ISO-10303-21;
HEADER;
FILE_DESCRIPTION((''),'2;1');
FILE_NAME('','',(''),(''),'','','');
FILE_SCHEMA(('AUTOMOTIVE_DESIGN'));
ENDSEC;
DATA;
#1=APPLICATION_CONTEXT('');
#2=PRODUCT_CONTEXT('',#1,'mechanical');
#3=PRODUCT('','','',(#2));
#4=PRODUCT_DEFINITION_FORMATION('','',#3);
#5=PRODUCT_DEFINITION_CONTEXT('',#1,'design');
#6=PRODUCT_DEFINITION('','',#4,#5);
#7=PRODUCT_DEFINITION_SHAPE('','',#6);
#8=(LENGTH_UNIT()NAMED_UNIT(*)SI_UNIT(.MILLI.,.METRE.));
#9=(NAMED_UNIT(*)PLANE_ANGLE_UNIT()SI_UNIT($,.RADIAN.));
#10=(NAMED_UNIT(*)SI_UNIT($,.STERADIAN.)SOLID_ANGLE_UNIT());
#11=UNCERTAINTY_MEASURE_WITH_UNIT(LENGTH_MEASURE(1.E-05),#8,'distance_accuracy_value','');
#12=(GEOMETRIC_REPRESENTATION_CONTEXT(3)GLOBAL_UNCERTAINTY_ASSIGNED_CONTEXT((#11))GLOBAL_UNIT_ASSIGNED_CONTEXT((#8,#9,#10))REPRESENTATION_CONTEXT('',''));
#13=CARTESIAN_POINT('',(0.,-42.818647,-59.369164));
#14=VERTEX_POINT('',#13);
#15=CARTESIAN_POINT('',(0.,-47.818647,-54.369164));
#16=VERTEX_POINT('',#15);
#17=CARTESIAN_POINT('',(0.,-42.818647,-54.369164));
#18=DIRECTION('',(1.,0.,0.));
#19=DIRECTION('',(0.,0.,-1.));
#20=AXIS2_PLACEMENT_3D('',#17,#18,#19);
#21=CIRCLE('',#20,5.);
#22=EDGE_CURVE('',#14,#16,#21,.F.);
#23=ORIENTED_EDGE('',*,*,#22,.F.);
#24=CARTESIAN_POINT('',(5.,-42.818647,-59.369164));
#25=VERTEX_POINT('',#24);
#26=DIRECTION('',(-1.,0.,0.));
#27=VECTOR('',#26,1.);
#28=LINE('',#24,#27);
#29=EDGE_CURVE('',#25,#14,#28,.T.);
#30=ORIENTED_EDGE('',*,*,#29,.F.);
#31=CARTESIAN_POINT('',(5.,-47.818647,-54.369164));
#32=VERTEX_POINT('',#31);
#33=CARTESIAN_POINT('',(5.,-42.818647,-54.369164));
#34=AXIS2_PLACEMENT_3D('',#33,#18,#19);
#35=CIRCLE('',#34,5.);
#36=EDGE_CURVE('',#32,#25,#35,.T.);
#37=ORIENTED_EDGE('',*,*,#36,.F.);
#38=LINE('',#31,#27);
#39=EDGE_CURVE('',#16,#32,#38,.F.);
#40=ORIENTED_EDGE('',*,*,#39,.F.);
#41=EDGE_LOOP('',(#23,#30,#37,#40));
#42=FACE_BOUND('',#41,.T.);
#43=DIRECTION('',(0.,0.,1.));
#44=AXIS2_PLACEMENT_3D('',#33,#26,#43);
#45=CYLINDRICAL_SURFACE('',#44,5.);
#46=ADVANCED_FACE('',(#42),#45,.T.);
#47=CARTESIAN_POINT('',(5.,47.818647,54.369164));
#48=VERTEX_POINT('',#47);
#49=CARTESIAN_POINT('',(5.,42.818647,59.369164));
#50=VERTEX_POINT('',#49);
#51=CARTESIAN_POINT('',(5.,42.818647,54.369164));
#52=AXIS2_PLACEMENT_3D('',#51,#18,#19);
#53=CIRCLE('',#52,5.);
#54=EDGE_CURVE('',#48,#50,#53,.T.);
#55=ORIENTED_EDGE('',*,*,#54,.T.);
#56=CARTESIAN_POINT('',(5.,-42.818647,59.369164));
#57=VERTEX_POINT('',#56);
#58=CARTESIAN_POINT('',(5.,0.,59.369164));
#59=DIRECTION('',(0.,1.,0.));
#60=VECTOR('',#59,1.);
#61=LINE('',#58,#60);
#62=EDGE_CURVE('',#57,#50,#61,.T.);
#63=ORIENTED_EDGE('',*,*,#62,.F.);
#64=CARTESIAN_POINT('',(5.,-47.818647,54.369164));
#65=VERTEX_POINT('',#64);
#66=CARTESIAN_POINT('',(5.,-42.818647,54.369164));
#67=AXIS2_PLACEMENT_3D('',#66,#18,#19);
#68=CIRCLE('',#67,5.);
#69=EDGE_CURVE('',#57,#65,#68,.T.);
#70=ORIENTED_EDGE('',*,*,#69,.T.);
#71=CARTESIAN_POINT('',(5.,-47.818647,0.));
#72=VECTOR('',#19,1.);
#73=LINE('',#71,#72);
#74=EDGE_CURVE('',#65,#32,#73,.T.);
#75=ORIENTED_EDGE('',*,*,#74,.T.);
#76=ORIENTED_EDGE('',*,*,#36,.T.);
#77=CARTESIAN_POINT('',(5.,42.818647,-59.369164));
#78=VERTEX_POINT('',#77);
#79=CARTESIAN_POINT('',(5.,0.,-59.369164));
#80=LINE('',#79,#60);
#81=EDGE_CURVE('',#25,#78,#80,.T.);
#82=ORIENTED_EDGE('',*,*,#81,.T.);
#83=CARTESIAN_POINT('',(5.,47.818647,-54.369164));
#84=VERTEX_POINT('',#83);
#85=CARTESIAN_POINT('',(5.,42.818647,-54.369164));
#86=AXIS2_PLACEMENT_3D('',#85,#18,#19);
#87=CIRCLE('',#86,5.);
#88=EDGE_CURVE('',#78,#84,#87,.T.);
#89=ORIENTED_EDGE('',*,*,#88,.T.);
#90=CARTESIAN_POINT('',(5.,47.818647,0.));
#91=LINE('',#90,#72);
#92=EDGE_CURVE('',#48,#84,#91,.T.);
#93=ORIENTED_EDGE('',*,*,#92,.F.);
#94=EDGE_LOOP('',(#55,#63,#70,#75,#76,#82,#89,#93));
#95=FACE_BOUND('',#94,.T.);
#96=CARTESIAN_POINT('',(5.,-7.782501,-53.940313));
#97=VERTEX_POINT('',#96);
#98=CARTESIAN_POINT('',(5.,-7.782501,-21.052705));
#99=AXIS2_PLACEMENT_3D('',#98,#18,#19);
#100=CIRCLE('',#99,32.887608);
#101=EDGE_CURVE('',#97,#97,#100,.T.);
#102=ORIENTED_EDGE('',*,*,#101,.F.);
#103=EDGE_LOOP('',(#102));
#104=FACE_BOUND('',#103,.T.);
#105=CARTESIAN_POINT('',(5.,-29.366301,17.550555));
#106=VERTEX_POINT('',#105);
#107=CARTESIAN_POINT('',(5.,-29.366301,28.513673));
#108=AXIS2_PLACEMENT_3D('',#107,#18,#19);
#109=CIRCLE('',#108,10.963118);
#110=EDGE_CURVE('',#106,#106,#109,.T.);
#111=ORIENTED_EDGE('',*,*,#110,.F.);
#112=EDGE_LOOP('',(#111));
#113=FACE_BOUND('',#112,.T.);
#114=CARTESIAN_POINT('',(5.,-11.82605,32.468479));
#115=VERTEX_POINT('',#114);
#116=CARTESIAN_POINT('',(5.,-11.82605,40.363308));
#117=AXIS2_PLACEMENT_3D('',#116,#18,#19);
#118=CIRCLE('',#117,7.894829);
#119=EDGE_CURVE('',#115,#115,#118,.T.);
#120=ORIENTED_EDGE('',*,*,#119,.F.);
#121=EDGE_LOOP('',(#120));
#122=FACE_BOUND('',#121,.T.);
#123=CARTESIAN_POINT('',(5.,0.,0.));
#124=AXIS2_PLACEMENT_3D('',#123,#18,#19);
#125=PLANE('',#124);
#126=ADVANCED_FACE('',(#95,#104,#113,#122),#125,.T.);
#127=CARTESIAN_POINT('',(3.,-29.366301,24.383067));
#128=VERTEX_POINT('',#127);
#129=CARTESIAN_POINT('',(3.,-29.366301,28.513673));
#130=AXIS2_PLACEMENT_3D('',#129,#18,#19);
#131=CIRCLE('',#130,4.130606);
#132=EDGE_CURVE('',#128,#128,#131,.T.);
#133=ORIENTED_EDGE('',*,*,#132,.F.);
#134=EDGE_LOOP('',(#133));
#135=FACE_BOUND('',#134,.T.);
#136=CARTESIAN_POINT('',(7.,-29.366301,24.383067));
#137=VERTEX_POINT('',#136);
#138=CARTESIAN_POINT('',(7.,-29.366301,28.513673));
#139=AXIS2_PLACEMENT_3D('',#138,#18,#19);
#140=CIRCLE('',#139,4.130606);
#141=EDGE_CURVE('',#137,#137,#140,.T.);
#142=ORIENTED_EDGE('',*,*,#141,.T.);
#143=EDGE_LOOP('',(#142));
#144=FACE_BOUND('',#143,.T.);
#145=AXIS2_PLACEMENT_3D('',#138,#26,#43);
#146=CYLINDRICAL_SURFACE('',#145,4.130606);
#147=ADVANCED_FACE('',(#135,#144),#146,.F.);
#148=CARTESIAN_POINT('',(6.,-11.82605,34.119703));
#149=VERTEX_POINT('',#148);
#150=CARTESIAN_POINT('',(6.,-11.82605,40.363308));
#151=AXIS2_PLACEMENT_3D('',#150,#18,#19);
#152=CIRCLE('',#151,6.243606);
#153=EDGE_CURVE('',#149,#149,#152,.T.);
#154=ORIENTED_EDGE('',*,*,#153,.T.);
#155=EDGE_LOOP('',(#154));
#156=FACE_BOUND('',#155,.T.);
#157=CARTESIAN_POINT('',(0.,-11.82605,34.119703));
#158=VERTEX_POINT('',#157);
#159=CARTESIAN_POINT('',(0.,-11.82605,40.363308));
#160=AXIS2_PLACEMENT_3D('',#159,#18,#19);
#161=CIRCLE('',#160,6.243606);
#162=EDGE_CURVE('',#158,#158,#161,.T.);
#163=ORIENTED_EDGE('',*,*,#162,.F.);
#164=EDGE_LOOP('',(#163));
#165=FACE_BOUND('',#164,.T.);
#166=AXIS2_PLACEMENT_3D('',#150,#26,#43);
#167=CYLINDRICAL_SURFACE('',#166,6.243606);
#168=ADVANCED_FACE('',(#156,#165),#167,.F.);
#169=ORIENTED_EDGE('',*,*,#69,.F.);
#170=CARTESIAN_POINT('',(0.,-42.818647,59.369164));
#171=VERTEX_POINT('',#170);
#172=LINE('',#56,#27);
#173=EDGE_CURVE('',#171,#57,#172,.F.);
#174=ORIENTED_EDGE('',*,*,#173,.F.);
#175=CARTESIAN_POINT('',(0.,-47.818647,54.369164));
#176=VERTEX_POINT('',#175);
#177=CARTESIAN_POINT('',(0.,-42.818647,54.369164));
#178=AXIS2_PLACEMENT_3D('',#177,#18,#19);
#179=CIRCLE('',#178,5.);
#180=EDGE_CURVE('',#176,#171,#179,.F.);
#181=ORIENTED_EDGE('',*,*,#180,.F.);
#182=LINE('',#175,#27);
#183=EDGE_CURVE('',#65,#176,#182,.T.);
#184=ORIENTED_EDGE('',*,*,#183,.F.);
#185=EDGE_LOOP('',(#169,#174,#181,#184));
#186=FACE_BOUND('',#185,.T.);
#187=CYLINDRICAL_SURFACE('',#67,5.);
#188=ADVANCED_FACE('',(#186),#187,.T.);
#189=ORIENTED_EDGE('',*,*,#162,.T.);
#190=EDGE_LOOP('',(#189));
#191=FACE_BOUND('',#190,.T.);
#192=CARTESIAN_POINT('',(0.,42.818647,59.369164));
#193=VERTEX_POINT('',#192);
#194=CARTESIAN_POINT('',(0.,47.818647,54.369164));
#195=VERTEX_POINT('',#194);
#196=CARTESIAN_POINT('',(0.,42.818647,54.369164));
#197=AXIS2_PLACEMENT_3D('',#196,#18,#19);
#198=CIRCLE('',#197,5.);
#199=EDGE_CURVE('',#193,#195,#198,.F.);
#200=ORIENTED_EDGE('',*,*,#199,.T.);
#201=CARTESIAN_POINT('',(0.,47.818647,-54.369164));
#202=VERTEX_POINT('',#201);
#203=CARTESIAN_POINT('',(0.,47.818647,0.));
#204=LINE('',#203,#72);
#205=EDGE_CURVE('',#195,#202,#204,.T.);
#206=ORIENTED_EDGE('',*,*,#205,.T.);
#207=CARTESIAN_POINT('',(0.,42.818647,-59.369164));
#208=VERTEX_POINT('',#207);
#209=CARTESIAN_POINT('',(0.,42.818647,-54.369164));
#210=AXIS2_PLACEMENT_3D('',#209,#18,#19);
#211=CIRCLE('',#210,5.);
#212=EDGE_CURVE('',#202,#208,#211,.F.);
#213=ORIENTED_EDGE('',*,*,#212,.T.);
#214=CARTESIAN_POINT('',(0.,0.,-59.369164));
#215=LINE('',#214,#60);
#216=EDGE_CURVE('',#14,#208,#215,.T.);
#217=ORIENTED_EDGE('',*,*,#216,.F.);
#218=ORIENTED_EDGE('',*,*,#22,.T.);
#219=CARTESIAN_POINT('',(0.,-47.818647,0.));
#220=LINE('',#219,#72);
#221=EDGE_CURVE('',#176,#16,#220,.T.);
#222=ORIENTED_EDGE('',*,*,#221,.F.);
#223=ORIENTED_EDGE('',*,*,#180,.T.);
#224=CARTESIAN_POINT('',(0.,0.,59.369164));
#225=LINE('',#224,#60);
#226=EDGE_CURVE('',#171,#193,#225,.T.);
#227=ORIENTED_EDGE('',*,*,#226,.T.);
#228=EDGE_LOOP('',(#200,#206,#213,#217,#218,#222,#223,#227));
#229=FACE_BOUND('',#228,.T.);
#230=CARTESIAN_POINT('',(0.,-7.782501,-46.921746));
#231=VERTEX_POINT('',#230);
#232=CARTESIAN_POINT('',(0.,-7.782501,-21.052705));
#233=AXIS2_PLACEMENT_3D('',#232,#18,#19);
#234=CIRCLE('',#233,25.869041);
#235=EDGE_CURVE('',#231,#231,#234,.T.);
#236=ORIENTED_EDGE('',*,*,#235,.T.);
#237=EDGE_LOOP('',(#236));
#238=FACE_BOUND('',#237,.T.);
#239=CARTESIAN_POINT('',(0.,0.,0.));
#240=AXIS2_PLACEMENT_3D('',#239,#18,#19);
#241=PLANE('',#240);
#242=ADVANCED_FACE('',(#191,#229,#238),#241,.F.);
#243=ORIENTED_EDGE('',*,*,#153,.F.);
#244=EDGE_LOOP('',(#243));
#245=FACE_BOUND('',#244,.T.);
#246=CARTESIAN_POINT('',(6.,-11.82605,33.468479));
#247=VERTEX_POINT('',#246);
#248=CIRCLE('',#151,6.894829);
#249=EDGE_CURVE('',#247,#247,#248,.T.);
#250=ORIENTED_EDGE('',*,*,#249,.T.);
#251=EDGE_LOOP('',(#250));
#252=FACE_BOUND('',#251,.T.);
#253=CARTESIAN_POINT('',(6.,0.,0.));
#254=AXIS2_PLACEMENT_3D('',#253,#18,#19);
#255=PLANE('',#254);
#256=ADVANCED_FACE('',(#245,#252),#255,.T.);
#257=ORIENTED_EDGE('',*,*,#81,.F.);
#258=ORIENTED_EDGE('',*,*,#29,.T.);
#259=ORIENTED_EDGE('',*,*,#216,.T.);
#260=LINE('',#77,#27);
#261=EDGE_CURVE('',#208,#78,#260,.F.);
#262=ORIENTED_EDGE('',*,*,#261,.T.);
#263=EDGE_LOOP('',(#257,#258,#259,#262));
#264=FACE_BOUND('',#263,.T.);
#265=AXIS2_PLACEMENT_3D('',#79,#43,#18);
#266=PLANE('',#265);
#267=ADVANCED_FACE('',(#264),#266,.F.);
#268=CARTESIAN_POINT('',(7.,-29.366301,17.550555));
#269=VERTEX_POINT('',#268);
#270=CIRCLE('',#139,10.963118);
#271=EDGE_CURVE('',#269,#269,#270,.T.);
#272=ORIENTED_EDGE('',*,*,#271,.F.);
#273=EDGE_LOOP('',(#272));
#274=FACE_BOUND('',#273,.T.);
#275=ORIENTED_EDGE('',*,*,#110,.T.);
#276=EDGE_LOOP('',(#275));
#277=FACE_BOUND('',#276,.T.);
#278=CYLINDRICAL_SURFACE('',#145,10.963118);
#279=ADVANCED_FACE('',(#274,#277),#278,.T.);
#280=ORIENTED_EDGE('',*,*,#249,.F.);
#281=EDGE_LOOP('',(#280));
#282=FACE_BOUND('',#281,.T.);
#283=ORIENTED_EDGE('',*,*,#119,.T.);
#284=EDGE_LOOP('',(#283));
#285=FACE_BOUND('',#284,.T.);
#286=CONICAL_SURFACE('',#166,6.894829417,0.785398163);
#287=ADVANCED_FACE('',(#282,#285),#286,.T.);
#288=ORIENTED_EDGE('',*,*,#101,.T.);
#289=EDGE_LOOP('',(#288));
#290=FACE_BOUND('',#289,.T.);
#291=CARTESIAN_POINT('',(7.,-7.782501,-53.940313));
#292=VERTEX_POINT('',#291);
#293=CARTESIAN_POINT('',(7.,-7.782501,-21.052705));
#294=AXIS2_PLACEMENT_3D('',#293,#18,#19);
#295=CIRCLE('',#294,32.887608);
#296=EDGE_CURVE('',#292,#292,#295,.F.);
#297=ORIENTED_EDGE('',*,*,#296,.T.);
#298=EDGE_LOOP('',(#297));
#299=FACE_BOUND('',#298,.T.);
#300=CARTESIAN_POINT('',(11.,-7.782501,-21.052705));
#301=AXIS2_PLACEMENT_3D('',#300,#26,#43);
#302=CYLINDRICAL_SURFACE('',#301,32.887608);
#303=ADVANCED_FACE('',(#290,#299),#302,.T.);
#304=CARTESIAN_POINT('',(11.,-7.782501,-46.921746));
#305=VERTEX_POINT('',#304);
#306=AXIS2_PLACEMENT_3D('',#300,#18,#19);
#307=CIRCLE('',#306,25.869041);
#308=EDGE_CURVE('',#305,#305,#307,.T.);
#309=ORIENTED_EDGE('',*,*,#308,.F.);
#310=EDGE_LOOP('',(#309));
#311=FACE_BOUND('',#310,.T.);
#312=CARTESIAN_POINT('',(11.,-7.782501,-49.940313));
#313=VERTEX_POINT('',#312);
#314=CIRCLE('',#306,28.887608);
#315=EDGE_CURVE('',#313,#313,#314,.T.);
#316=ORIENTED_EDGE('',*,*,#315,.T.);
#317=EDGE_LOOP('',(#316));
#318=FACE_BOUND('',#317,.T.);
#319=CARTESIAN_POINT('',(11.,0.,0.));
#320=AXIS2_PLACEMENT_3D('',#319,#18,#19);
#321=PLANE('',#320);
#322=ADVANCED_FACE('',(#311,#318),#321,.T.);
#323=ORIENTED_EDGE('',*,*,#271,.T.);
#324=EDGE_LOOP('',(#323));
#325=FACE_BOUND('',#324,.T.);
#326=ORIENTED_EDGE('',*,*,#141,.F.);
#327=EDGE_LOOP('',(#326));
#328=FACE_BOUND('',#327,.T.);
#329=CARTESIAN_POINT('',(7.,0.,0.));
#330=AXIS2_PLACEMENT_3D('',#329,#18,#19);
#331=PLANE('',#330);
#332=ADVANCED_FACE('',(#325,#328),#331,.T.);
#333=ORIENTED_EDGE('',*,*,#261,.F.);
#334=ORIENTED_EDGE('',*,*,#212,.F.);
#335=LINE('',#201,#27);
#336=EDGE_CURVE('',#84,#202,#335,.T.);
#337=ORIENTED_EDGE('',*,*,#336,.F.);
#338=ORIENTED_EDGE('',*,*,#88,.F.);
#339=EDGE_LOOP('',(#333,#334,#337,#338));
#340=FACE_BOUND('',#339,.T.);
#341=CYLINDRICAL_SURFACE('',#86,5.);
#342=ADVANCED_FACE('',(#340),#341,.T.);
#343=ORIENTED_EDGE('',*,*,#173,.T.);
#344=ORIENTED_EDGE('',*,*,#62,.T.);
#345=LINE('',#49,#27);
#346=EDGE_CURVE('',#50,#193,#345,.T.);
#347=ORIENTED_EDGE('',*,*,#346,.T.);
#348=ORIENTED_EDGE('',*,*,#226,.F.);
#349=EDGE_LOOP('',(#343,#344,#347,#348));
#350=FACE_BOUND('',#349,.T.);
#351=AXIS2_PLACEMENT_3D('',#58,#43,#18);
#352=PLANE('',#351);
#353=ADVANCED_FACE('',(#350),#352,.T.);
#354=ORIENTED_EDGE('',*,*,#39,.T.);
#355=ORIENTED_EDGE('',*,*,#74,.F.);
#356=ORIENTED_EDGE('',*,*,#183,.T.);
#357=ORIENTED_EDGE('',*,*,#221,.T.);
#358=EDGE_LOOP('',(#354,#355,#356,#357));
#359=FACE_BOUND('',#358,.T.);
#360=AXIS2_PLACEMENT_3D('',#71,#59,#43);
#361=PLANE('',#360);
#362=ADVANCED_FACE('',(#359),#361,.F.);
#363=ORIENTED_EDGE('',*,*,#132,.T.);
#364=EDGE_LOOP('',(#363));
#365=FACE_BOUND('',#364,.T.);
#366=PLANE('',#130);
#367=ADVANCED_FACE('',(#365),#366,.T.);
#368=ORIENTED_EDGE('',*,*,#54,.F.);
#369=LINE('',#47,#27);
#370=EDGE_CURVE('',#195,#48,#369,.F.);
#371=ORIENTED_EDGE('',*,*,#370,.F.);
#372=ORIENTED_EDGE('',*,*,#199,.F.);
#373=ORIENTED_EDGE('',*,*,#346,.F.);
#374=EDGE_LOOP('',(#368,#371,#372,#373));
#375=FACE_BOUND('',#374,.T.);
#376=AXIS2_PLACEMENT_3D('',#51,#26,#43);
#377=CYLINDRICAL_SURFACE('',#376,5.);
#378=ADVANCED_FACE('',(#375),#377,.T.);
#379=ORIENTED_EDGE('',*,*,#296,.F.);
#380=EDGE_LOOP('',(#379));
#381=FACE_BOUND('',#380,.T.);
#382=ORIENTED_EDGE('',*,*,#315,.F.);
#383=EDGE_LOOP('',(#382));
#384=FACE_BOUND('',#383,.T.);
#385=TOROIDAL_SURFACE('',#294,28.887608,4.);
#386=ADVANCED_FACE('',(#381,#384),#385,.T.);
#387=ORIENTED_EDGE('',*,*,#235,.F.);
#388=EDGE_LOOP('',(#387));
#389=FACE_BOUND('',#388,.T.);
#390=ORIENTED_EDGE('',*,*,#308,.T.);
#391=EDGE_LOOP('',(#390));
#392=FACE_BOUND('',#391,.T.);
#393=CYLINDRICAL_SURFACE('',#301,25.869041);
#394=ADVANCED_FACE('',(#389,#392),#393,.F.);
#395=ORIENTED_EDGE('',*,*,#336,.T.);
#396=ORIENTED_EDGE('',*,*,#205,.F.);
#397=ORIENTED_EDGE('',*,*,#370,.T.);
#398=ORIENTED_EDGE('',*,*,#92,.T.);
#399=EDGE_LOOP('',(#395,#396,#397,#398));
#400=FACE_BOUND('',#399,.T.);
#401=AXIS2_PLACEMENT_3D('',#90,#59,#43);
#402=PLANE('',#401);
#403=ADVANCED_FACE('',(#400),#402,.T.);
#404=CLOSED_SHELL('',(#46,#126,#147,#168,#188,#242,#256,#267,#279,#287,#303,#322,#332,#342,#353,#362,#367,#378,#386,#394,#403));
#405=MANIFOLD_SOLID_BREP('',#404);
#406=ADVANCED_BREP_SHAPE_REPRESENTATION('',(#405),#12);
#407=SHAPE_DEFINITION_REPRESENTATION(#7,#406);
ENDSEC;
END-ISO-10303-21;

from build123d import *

# Parameters (mm, degrees)
SKETCH1_W           = 118.7383283
SKETCH1_H           = 95.637293174
SKETCH1_R           = 7.894829417
SKETCH1_R_2         = 10.963118073
SKETCH1_R_3         = 32.887608347
BOSS_EXTRUDE1_DEPTH = 5
SKETCH1_3_R         = 32.887608347
SKETCH1_3_R_2       = 25.869040911
BOSS_EXTRUDE2_DEPTH = 11
FILLET1_R           = 4
SKETCH1_4_R         = 10.963118073
SKETCH1_4_R_2       = 4.130606261
BOSS_EXTRUDE3_DEPTH = 7
SKETCH1_5_R         = 7.894829417
SKETCH1_5_R_2       = 6.243605875
BOSS_EXTRUDE4_DEPTH = 6
CHAMFER1_SIZE       = 1
FILLET2_R           = 5
SKETCH1_6_R         = 4.130606261
BOSS_EXTRUDE5_DEPTH = 3


with BuildPart() as part:
    # Sketch1 → Boss-Extrude1 (new body)
    with BuildSketch(Plane(origin=(0, 0, 0), x_dir=(0, 0, -1), z_dir=(1, 0, 0))):
        Rectangle(SKETCH1_W, SKETCH1_H)
        with Locations((-40.363308429, -11.826050305)):
            Circle(SKETCH1_R, mode=Mode.SUBTRACT)
        with Locations((-28.513672981, -29.366301206)):
            Circle(SKETCH1_R_2, mode=Mode.SUBTRACT)
        with Locations((21.052704773, -7.782501182)):
            Circle(SKETCH1_R_3, mode=Mode.SUBTRACT)
    extrude(amount=BOSS_EXTRUDE1_DEPTH)

    # Sketch1<3> → Boss-Extrude2 (add)
    with BuildSketch(Plane(origin=(0, 0, 0), x_dir=(0, 0, -1), z_dir=(1, 0, 0))):
        with Locations((21.052704773, -7.782501182)):
            Circle(SKETCH1_3_R)
        with Locations((21.052704773, -7.782501182)):
            Circle(SKETCH1_3_R_2, mode=Mode.SUBTRACT)
    extrude(amount=BOSS_EXTRUDE2_DEPTH)

    # Fillet1
    fillet1_edges = [part.edges().sort_by_distance(p)[0] for p in [
        (11, -7.782501182, 11.834903573),
    ]]
    fillet(fillet1_edges, radius=FILLET1_R)

    # Sketch1<4> → Boss-Extrude3 (add)
    with BuildSketch(Plane(origin=(0, 0, 0), x_dir=(0, 0, -1), z_dir=(1, 0, 0))):
        with Locations((-28.513672981, -29.366301206)):
            Circle(SKETCH1_4_R)
        with Locations((-28.513672981, -29.366301206)):
            Circle(SKETCH1_4_R_2, mode=Mode.SUBTRACT)
    extrude(amount=BOSS_EXTRUDE3_DEPTH)

    # Sketch1<5> → Boss-Extrude4 (add)
    with BuildSketch(Plane(origin=(0, 0, 0), x_dir=(0, 0, -1), z_dir=(1, 0, 0))):
        with Locations((-40.363308429, -11.826050305)):
            Circle(SKETCH1_5_R)
        with Locations((-40.363308429, -11.826050305)):
            Circle(SKETCH1_5_R_2, mode=Mode.SUBTRACT)
    extrude(amount=BOSS_EXTRUDE4_DEPTH)

    # Chamfer1
    chamfer1_edges = [part.edges().sort_by_distance(p)[0] for p in [
        (6, -11.826050305, 48.258137847),
    ]]
    chamfer(chamfer1_edges, length=CHAMFER1_SIZE - 0.0001)  # a hair under: the kernel refuses the full size

    # Fillet2
    fillet2_edges = [part.edges().sort_by_distance(p)[0] for p in [
        (2.5, -47.818646587, 59.36916415),
        (2.5, 47.818646587, 59.36916415),
        (2.5, 47.818646587, -59.36916415),
        (2.5, -47.818646587, -59.36916415),
    ]]
    fillet(fillet2_edges, radius=FILLET2_R)

    # Sketch1<6> → Boss-Extrude5 (add)
    with BuildSketch(Plane(origin=(0, 0, 0), x_dir=(0, 0, -1), z_dir=(1, 0, 0))):
        with Locations((-28.513672981, -29.366301206)):
            Circle(SKETCH1_6_R)
    extrude(amount=BOSS_EXTRUDE5_DEPTH)


solid = part.part
